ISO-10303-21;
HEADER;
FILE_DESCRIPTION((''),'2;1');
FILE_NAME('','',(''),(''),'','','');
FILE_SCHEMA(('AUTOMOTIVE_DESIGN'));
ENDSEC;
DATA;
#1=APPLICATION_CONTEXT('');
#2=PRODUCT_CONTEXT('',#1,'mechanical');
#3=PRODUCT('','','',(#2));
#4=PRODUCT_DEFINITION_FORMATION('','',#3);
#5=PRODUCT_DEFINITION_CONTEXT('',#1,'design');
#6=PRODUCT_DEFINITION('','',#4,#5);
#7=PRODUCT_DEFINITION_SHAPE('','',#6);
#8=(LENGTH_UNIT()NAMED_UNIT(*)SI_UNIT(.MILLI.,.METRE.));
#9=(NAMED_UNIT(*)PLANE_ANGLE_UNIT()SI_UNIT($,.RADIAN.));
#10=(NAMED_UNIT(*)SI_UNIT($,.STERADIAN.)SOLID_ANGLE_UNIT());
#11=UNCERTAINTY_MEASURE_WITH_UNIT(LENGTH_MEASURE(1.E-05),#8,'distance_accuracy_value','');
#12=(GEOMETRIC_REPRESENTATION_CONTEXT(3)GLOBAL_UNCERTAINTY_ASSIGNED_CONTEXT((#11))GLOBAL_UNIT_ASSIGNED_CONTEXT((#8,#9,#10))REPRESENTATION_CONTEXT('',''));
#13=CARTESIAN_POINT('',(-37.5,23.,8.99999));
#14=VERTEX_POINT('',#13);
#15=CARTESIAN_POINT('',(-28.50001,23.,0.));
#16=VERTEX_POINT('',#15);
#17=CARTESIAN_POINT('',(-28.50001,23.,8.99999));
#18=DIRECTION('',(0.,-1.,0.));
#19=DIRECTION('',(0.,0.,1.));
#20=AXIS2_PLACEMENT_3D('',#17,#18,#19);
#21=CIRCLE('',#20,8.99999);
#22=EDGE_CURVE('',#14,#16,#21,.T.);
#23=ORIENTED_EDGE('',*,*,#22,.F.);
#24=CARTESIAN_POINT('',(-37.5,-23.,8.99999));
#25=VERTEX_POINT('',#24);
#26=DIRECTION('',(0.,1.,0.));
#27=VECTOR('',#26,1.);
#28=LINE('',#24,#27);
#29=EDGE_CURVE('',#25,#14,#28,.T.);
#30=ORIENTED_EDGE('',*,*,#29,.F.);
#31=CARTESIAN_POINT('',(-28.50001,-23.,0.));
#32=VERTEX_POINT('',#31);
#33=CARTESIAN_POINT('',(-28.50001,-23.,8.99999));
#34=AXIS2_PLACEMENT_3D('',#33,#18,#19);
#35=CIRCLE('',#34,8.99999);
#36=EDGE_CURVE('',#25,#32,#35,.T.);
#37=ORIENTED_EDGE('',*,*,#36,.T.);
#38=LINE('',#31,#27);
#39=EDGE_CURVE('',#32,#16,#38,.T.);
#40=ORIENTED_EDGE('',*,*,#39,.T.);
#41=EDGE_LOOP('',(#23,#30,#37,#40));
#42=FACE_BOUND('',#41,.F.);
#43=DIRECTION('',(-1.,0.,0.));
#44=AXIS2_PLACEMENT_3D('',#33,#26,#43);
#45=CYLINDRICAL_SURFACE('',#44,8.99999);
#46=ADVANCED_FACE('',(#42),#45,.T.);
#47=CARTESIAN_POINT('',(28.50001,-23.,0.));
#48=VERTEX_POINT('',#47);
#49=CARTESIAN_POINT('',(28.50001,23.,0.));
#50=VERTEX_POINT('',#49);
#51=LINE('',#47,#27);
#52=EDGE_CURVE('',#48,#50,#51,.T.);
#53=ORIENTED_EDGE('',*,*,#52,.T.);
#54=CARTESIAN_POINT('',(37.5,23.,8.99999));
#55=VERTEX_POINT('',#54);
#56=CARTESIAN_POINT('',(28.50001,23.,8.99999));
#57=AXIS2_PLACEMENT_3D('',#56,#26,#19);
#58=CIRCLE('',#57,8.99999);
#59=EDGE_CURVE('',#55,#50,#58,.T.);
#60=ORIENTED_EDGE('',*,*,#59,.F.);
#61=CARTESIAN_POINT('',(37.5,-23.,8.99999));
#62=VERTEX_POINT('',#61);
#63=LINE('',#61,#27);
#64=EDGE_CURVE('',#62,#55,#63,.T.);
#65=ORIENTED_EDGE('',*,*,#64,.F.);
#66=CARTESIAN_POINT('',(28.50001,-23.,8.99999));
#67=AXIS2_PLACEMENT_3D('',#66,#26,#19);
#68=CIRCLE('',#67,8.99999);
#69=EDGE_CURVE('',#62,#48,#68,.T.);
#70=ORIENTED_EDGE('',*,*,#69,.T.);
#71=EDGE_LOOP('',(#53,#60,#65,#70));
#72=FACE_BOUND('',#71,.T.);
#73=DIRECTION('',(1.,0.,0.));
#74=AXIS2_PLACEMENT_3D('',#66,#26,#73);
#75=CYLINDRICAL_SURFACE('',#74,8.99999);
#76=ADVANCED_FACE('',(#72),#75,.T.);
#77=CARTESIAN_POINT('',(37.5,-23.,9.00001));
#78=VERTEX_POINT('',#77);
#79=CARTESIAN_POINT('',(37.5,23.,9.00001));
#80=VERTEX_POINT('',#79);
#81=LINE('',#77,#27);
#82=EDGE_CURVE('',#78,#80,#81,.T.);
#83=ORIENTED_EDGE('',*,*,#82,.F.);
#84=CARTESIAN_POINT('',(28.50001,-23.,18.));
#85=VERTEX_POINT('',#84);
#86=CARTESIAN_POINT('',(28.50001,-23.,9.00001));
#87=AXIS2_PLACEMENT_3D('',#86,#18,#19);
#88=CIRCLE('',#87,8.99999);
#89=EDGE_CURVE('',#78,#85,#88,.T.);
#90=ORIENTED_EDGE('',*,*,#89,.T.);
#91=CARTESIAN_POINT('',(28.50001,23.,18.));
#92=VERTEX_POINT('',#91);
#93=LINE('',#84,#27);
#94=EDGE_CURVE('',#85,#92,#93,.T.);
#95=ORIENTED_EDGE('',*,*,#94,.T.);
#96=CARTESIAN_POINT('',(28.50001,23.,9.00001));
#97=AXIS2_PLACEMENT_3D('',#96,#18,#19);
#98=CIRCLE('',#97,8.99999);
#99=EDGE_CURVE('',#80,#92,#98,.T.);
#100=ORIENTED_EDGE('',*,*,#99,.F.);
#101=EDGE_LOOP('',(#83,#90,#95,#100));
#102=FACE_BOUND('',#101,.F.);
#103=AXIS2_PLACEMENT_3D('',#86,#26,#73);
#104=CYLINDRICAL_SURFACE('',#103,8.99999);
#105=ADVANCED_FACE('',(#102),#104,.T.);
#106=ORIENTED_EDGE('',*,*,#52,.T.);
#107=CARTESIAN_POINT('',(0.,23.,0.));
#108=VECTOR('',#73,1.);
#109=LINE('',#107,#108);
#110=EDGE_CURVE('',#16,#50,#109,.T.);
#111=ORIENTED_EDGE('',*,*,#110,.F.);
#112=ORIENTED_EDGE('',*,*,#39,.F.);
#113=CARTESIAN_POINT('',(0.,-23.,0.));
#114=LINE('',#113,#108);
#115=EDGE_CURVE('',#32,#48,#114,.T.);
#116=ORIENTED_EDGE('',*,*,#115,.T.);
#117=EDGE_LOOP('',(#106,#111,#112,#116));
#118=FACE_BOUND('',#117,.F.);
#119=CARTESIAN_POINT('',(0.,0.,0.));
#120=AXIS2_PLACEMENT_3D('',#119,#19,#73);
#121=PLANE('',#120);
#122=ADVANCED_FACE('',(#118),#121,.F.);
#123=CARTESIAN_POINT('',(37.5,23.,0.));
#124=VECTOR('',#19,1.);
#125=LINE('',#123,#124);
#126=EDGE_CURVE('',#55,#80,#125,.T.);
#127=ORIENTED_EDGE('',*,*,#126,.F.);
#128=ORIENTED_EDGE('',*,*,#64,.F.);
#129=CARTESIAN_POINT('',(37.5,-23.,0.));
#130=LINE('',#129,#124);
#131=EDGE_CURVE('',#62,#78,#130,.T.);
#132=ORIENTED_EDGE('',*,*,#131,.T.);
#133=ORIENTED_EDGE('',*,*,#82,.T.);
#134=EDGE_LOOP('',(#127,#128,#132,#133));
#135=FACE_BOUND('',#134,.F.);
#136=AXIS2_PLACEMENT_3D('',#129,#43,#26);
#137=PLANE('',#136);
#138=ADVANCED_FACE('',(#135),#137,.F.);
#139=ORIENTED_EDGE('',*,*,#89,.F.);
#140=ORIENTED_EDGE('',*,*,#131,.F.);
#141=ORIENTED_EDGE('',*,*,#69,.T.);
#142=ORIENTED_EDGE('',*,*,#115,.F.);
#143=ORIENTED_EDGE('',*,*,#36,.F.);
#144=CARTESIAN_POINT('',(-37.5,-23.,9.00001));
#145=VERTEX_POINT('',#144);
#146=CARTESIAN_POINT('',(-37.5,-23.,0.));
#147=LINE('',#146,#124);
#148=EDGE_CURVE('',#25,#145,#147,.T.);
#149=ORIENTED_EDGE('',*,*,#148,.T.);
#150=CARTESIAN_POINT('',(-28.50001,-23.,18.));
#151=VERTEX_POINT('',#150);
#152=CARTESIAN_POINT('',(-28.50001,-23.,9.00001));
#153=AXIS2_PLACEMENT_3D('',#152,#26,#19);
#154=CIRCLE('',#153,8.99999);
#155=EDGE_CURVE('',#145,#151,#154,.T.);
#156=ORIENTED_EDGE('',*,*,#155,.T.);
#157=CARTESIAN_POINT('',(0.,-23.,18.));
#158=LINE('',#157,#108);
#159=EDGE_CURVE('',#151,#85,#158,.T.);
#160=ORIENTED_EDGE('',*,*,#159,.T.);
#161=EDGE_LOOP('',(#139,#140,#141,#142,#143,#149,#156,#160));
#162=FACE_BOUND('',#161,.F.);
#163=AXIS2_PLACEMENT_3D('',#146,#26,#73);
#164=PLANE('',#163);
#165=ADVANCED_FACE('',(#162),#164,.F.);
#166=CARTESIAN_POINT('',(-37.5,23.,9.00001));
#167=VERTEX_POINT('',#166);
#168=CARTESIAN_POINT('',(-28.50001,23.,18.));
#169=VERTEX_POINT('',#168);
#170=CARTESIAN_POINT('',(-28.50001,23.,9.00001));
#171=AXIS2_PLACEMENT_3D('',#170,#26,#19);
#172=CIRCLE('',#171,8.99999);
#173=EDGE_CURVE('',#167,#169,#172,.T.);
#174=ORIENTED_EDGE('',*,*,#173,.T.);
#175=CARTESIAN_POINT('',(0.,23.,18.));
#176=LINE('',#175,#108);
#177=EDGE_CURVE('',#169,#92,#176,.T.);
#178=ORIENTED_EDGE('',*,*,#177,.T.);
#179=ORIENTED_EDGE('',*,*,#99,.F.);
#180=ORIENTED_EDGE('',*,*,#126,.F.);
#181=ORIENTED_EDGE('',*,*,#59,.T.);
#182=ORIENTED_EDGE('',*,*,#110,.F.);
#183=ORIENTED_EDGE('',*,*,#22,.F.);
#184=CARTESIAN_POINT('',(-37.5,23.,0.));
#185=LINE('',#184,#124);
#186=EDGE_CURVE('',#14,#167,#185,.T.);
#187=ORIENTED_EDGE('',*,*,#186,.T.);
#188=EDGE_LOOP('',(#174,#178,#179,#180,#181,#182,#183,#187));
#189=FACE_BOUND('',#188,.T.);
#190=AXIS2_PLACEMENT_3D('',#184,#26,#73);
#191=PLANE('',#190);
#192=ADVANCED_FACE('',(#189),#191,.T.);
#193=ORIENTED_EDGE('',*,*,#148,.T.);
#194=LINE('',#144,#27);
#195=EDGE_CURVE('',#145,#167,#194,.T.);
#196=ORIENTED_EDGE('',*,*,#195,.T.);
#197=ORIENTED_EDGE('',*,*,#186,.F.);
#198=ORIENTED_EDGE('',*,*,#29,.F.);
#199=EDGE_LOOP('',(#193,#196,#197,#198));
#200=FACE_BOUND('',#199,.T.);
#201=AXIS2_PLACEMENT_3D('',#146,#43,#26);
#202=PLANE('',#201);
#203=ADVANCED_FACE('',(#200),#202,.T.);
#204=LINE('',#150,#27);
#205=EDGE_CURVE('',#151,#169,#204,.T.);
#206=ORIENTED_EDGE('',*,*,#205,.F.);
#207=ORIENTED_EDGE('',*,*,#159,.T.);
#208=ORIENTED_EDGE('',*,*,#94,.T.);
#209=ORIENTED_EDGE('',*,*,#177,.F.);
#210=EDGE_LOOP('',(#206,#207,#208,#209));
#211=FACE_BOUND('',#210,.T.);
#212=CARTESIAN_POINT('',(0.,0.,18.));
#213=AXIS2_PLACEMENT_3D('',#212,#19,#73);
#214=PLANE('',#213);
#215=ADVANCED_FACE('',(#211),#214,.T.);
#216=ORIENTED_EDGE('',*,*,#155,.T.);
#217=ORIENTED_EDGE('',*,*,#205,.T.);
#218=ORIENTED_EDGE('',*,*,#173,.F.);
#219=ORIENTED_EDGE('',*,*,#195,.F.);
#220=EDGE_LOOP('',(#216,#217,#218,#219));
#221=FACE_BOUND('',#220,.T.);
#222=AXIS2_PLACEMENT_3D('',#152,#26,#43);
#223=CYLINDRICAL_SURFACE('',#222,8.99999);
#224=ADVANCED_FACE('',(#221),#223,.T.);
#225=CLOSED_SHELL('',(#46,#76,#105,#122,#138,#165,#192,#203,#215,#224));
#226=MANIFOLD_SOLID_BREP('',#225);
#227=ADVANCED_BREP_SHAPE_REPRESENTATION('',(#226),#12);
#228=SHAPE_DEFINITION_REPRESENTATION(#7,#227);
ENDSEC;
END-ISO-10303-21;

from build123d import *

# Parameters (mm, degrees)
F0_W     = 75
F0_H     = 46
F1_DEPTH = 18
F2_R     = 8.99999


# Not quite as in the source:
# - a fillet or chamfer is up to 0.001 mm smaller than in the source, because OpenCascade refuses the exact size


with BuildPart() as f1:
    # F0 (on Top) → F1 (new body)
    with BuildSketch(Plane.XY):
        Rectangle(F0_W, F0_H)
    extrude(amount=F1_DEPTH)

    # F2 (radius 9 in the source; OpenCascade refuses exactly that, so slightly less here)
    f2_edges = [f1.edges().sort_by_distance(p)[0] for p in [
        (37.5, 0, 18),
        (37.5, 0, 0),
        (-37.5, 0, 0),
        (-37.5, 0, 18),
    ]]
    fillet(f2_edges, radius=F2_R)


solid = f1.part
